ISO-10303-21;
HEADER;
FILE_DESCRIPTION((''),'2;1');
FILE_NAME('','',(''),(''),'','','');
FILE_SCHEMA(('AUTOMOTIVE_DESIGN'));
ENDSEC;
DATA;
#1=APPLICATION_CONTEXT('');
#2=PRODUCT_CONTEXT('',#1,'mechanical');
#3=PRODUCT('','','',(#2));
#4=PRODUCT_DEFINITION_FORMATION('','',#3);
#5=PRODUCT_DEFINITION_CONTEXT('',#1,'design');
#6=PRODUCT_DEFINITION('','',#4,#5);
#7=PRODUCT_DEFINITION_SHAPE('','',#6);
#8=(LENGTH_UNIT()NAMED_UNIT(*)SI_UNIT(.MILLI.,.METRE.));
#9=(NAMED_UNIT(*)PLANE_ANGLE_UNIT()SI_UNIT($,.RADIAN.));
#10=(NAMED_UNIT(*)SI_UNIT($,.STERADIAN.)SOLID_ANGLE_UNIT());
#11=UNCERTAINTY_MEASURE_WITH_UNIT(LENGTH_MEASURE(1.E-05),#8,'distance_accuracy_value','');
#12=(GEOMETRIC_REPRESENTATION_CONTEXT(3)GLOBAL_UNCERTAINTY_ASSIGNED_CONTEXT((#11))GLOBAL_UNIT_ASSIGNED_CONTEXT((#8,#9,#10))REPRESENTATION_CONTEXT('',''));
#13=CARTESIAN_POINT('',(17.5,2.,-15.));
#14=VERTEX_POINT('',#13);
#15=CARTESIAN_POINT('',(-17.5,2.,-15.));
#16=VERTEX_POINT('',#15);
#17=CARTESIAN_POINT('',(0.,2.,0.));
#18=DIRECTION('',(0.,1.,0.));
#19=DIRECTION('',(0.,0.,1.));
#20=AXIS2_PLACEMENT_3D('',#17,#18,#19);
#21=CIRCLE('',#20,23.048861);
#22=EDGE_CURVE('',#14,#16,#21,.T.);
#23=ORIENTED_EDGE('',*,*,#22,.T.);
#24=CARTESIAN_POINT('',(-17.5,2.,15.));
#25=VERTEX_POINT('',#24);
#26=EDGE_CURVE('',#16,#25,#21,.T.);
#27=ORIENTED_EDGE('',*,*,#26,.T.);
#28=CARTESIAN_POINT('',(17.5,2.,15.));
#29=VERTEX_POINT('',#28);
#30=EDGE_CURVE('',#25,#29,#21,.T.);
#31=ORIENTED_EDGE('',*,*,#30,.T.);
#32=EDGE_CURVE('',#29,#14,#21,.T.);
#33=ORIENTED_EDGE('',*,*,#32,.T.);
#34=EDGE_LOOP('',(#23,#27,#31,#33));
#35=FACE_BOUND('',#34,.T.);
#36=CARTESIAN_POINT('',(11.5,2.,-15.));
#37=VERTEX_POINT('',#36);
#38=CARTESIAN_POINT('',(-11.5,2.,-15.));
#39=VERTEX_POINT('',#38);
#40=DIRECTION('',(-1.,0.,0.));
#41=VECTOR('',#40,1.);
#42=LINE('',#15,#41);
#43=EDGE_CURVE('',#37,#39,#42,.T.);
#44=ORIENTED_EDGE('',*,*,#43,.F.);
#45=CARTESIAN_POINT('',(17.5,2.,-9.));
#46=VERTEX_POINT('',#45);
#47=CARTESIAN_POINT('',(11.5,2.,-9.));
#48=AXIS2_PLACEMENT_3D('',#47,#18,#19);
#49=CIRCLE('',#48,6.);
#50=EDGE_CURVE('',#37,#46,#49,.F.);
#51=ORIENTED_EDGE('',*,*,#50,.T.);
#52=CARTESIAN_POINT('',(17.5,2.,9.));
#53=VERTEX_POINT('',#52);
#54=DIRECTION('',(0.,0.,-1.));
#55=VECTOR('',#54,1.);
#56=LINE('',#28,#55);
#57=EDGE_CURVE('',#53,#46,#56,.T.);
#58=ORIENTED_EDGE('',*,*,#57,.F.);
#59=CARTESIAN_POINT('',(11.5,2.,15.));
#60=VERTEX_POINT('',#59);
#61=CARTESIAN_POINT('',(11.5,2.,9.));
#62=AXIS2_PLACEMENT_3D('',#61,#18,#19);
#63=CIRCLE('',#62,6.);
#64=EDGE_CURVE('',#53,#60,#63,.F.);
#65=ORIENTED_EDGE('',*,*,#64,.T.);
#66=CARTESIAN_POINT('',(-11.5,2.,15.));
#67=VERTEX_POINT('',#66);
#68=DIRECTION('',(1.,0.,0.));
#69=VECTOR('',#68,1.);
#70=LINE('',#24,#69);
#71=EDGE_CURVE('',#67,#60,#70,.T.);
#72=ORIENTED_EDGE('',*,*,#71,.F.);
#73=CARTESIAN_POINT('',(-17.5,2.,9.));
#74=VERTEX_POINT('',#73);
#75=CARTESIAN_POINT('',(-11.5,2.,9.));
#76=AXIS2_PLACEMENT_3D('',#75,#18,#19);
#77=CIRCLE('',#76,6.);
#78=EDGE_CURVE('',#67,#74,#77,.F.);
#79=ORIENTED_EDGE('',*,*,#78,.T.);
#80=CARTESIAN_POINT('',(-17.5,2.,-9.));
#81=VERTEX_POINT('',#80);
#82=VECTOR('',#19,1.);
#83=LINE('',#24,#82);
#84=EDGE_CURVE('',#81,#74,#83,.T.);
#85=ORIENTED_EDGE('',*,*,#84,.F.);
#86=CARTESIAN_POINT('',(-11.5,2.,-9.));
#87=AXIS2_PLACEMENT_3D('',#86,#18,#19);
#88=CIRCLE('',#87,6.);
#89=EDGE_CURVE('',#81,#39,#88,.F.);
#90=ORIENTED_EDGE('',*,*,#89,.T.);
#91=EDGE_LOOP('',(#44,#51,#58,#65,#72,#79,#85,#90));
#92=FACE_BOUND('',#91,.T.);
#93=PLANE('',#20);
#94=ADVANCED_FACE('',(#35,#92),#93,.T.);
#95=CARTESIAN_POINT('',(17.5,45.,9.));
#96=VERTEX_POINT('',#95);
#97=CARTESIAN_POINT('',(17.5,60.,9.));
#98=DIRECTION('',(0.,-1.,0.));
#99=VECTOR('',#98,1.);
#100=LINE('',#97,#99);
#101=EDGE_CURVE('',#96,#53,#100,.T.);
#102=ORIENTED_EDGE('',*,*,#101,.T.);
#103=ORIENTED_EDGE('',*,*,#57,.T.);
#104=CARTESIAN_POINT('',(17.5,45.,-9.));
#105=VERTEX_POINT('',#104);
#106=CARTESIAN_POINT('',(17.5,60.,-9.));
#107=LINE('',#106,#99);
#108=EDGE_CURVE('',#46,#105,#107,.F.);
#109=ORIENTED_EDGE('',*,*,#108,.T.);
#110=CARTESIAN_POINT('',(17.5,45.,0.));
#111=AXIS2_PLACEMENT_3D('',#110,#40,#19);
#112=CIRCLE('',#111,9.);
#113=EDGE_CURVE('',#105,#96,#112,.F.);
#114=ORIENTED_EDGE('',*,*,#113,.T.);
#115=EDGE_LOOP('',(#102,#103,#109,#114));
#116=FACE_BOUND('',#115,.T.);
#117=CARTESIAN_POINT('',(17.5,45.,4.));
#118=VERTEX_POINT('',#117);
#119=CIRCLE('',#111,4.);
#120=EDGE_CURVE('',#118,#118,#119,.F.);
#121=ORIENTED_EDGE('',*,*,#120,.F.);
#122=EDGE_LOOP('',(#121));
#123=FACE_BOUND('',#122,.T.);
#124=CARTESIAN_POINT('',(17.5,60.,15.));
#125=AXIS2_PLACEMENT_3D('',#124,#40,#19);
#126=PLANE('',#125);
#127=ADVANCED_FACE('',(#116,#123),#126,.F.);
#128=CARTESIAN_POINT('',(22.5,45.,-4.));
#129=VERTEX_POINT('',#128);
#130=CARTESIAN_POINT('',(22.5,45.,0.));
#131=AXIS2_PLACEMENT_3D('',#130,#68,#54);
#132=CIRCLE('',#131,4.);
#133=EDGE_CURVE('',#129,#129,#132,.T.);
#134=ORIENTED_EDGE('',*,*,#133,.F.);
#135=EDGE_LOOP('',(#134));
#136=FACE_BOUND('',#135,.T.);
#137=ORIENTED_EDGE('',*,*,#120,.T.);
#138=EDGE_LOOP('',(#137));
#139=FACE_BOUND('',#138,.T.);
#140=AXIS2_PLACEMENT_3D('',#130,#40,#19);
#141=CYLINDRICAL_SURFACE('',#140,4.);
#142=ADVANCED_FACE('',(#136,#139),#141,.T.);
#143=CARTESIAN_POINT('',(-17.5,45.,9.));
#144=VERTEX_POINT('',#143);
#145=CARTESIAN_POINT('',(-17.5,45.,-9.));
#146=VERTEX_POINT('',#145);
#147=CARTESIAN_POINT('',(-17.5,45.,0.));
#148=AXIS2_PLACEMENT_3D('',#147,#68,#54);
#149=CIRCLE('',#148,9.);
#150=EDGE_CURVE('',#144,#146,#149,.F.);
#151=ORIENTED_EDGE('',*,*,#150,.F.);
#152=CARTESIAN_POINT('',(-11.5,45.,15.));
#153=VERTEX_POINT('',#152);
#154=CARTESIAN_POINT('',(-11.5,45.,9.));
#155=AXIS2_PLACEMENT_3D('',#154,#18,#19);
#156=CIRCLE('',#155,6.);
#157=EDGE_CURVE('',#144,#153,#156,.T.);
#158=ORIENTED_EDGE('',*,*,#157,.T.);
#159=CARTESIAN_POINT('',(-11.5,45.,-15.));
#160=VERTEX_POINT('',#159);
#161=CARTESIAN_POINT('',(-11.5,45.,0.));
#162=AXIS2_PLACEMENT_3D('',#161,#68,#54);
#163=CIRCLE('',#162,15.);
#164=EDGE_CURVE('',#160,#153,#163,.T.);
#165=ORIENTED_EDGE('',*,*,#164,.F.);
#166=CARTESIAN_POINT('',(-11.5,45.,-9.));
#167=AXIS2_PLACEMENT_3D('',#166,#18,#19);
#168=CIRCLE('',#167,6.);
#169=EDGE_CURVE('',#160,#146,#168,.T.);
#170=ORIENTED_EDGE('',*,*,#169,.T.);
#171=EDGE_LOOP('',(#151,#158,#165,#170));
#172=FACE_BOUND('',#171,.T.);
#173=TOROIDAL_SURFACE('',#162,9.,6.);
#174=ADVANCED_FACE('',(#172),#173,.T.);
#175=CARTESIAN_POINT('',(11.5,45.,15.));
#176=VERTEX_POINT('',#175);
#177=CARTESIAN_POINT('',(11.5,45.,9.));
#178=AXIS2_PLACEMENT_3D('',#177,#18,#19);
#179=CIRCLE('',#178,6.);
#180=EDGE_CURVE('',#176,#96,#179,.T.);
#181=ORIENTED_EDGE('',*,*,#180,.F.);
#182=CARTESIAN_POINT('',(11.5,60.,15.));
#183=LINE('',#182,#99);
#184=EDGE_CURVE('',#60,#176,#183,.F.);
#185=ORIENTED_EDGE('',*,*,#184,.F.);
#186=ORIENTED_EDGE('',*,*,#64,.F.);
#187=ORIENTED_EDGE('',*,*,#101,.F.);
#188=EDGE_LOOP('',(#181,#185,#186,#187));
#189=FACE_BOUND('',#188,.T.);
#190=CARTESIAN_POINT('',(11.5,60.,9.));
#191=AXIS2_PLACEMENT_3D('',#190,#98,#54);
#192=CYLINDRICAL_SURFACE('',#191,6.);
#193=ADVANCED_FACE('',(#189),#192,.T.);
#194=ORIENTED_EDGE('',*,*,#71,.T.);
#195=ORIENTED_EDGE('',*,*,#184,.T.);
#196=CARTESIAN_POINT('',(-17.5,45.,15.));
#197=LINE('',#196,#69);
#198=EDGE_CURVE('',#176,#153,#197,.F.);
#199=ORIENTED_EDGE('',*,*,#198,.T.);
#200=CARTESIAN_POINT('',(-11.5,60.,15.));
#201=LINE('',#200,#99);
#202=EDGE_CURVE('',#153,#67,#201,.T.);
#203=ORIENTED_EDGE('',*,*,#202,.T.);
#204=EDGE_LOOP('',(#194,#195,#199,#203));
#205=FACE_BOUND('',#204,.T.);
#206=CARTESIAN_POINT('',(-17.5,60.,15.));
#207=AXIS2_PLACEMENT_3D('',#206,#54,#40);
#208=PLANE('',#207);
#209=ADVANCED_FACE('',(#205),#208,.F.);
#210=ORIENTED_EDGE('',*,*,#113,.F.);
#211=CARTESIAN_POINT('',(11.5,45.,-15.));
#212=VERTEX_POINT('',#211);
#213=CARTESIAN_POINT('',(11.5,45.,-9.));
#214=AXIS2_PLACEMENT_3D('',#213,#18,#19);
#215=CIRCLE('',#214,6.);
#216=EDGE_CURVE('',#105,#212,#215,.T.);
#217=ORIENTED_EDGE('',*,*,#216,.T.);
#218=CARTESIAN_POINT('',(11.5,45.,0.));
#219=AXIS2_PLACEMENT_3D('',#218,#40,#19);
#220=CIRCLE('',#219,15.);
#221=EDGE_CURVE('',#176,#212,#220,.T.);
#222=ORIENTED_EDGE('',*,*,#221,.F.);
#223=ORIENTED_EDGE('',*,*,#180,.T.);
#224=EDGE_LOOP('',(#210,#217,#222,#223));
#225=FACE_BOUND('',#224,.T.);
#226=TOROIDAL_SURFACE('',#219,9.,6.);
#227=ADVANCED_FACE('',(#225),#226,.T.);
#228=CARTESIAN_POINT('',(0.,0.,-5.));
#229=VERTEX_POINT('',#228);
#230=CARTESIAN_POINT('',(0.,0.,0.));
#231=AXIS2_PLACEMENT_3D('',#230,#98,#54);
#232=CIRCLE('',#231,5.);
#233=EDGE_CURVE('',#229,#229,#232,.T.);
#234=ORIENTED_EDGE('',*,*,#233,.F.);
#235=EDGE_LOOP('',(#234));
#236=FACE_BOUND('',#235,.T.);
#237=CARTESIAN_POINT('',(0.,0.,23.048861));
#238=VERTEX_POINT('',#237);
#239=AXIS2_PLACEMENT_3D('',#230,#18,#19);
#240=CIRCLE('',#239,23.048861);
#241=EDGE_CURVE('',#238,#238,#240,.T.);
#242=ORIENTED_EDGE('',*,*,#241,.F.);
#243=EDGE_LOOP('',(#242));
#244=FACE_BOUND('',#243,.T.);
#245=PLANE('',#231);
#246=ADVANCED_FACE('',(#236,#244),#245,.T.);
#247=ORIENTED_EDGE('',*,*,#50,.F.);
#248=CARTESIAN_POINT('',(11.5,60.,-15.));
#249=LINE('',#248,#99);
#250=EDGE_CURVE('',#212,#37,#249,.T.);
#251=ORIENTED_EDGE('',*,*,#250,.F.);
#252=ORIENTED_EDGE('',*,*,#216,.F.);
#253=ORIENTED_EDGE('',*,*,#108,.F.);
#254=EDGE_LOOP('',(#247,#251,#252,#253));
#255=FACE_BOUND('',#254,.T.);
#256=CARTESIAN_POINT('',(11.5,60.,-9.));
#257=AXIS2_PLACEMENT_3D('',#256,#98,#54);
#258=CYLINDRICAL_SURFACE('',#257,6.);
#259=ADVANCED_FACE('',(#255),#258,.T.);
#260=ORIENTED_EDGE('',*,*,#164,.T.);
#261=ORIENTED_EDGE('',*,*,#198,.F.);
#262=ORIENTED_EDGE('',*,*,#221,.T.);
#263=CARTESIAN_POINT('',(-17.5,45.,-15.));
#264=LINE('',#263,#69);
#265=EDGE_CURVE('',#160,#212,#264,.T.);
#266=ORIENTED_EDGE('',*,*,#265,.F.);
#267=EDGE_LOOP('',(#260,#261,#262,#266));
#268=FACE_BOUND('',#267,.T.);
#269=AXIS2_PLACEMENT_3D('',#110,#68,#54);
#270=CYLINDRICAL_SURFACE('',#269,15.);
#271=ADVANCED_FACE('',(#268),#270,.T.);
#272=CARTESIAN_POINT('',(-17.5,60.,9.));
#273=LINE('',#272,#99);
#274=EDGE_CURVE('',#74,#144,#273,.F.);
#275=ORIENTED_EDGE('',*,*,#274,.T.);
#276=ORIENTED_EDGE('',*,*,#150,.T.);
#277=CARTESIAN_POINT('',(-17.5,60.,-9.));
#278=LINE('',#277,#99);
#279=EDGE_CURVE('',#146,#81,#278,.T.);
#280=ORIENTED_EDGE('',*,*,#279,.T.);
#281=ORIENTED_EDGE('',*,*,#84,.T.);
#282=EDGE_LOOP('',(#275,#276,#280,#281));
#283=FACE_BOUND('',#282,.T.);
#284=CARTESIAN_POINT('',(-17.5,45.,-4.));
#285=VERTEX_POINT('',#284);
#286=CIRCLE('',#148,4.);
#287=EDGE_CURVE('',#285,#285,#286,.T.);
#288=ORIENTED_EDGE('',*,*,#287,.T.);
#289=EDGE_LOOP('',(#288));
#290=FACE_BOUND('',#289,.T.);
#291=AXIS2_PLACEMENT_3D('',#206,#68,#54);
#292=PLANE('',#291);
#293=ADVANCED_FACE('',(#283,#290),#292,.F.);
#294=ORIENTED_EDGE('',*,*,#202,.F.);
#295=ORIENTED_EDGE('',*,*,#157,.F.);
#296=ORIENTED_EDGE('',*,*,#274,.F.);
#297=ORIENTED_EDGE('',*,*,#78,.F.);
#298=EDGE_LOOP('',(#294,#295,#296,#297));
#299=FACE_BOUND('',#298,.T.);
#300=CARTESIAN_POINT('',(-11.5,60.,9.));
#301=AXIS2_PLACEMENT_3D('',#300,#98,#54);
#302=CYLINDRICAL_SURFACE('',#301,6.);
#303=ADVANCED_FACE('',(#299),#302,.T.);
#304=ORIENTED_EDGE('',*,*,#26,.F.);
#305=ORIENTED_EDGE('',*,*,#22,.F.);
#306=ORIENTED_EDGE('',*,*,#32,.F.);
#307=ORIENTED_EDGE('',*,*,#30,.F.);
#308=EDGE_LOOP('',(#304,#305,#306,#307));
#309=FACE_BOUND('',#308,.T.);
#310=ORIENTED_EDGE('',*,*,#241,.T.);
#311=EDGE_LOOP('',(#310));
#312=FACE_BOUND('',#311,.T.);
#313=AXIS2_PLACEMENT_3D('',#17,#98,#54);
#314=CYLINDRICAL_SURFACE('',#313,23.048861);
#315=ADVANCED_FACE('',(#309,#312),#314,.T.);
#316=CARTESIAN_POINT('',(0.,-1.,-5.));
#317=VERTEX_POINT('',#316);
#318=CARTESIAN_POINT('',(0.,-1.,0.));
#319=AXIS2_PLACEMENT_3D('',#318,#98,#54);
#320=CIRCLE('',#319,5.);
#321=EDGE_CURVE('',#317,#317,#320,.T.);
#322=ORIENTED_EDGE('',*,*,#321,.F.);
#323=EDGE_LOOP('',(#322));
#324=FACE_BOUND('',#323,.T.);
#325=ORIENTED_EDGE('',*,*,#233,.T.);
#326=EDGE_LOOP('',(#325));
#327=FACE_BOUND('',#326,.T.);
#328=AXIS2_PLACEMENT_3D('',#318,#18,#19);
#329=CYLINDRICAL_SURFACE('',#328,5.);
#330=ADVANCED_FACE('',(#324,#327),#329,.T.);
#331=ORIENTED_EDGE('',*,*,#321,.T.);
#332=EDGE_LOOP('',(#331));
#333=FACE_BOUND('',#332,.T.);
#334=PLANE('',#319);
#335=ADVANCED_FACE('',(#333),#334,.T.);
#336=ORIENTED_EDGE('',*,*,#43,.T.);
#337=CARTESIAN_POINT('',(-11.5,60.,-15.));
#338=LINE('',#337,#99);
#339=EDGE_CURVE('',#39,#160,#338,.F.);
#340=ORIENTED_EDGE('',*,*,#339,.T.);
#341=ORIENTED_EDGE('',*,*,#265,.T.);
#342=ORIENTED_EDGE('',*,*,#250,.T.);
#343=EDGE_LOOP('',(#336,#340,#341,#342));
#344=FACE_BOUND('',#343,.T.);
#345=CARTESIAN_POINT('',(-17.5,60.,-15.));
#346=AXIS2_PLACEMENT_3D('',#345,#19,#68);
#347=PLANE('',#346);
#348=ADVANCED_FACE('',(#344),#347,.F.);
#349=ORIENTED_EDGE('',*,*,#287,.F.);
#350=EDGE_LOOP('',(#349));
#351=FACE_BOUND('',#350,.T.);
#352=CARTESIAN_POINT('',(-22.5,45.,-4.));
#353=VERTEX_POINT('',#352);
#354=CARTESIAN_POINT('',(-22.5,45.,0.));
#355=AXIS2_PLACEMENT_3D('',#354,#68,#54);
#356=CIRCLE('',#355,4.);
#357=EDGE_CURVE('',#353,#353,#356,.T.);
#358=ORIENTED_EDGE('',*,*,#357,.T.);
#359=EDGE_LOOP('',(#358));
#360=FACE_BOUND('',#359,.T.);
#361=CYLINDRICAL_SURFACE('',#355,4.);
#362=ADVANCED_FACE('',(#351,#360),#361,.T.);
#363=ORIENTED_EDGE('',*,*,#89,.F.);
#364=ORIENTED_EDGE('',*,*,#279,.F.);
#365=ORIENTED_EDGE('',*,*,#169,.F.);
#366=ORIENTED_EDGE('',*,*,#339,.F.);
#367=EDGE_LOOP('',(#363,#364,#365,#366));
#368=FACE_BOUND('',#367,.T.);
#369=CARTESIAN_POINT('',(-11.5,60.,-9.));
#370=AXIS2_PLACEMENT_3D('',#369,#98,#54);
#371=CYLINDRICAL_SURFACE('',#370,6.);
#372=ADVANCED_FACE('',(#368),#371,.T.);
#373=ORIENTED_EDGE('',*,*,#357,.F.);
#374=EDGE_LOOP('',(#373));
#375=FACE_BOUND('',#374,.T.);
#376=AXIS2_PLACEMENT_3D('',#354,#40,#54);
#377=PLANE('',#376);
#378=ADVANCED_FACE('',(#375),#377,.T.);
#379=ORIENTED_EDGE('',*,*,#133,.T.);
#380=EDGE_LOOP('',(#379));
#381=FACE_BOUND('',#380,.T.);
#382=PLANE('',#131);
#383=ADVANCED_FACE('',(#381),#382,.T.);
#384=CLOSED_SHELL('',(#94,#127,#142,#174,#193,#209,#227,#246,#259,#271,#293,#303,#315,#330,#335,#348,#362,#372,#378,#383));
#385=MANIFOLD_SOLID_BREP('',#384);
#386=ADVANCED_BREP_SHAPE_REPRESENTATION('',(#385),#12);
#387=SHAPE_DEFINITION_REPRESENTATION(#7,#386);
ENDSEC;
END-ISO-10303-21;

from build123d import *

# Parameters (mm, degrees)
SKETCH1_W           = 35
SKETCH1_H           = 30
BOSS_EXTRUDE1_DEPTH = 60
SKETCH2_R           = 4
BOSS_EXTRUDE2_DEPTH = 5
SKETCH4_R           = 23.048861143
BOSS_EXTRUDE3_DEPTH = 2
FILLET3_RADIUS      = 15
FILLET3_LENGTH      = 35
FILLET1_R           = 6
SKETCH7_R           = 5
BOSS_EXTRUDE4_DEPTH = 1


with BuildPart() as part:
    # Sketch1 → Boss-Extrude1 (new body)
    with BuildSketch(Plane(origin=(0, 0, 0), x_dir=(1, 0, 0), z_dir=(0, 1, 0))):
        Rectangle(SKETCH1_W, SKETCH1_H)
    extrude(amount=BOSS_EXTRUDE1_DEPTH)

    # Sketch2 → Boss-Extrude2 (add)
    with BuildSketch(Plane(origin=(17.5, 0, 0), x_dir=(0, 0, -1), z_dir=(1, 0, 0))):
        with Locations(Location((0, 45, 0), (0, 0, 180))):
            Circle(SKETCH2_R)
    boss_extrude2 = extrude(amount=BOSS_EXTRUDE2_DEPTH)

    # Mirror1: Boss-Extrude2 across plane
    add(boss_extrude2.mirror(Plane(origin=(0, 0, 0), x_dir=(0, 0, 1), z_dir=(1, 0, 0))))

    # Sketch4 → Boss-Extrude3 (add)
    with BuildSketch(Plane(origin=(0, 0, 0), x_dir=(1, 0, 0), z_dir=(0, 1, 0))):
        with Locations(Location((0, 0, 0), (0, 0, 40.601294645))):
            Circle(SKETCH4_R)
    extrude(amount=BOSS_EXTRUDE3_DEPTH)

    # Fillet3: full round fillet: the end face becomes a half cylinder, R = half its width
    fillet3_face = Plane((0, 60, 0), x_dir=(1, 0, 0), z_dir=(0, 1, 0))  # on the end face: x along it, z out of the body
    fillet3_slab = fillet3_face.offset(-FILLET3_RADIUS / 2) * Box(FILLET3_LENGTH, 2 * FILLET3_RADIUS, FILLET3_RADIUS, mode=Mode.PRIVATE)  # the body's end, R deep
    fillet3_round = Plane((0, 45, 0), x_dir=(0, 1, 0), z_dir=(1, 0, 0)) * Cylinder(FILLET3_RADIUS, FILLET3_LENGTH, mode=Mode.PRIVATE)  # its axis R under the face
    add(fillet3_slab - fillet3_round, mode=Mode.SUBTRACT)

    # Fillet1
    # the kernel refuses this fillet: 6 mm, written as the material it takes off along each edge
    with BuildSketch(Plane(origin=(-17.5, 2, 15), x_dir=(0, 0, -1), z_dir=(0, 1, 0)), Plane(origin=(17.5, 2, 15), x_dir=(-1, 0, 0), z_dir=(0, 1, 0)), Plane(origin=(17.5, 2, -15), x_dir=(0, 0, 1), z_dir=(0, 1, 0))) as fillet1_piece_1:
        with BuildLine():
            CenterArc((FILLET1_R, -FILLET1_R), FILLET1_R, 90, 90)
            Line((0, -FILLET1_R), (0, 0))
            Line((0, 0), (FILLET1_R, 0))
        make_face()
    extrude(amount=43, mode=Mode.SUBTRACT)
    with BuildSketch(Plane(origin=(-17.5, 2, -15), x_dir=(0, 0, 1), z_dir=(0, 1, 0))) as fillet1_piece_2:
        with BuildLine():
            CenterArc((FILLET1_R, FILLET1_R), FILLET1_R, 180, 90)
            Line((0, FILLET1_R), (0, 0))
            Line((0, 0), (FILLET1_R, 0))
        make_face()
    extrude(amount=43, mode=Mode.SUBTRACT)
    with BuildSketch(Plane(origin=(17.5, 45, 0), x_dir=(0, 0, -1), z_dir=(0, -1, 0))) as fillet1_piece_3:
        with BuildLine():
            CenterArc((15 - FILLET1_R, -FILLET1_R), FILLET1_R, 0, 90)
            Line((15, -FILLET1_R), (15, 0))
            Line((15, 0), (15 - FILLET1_R, 0))
        make_face()
    revolve(axis=Axis((17.5, 45, 0), (1, 0, 0)), revolution_arc=180, mode=Mode.SUBTRACT)
    with BuildSketch(Plane(origin=(-17.5, 45, 0), x_dir=(0, 0, 1), z_dir=(0, -1, 0))) as fillet1_piece_4:
        with BuildLine():
            CenterArc((15 - FILLET1_R, -FILLET1_R), FILLET1_R, 0, 90)
            Line((15, -FILLET1_R), (15, 0))
            Line((15, 0), (15 - FILLET1_R, 0))
        make_face()
    revolve(axis=Axis((-17.5, 45, 0), (-1, 0, 0)), revolution_arc=180, mode=Mode.SUBTRACT)

    # Sketch7 → Boss-Extrude4 (add)
    with BuildSketch(Plane.XZ):
        with Locations(Location((0, 0, 0), (0, 0, 270))):
            Circle(SKETCH7_R)
    extrude(amount=BOSS_EXTRUDE4_DEPTH)


solid = part.part
